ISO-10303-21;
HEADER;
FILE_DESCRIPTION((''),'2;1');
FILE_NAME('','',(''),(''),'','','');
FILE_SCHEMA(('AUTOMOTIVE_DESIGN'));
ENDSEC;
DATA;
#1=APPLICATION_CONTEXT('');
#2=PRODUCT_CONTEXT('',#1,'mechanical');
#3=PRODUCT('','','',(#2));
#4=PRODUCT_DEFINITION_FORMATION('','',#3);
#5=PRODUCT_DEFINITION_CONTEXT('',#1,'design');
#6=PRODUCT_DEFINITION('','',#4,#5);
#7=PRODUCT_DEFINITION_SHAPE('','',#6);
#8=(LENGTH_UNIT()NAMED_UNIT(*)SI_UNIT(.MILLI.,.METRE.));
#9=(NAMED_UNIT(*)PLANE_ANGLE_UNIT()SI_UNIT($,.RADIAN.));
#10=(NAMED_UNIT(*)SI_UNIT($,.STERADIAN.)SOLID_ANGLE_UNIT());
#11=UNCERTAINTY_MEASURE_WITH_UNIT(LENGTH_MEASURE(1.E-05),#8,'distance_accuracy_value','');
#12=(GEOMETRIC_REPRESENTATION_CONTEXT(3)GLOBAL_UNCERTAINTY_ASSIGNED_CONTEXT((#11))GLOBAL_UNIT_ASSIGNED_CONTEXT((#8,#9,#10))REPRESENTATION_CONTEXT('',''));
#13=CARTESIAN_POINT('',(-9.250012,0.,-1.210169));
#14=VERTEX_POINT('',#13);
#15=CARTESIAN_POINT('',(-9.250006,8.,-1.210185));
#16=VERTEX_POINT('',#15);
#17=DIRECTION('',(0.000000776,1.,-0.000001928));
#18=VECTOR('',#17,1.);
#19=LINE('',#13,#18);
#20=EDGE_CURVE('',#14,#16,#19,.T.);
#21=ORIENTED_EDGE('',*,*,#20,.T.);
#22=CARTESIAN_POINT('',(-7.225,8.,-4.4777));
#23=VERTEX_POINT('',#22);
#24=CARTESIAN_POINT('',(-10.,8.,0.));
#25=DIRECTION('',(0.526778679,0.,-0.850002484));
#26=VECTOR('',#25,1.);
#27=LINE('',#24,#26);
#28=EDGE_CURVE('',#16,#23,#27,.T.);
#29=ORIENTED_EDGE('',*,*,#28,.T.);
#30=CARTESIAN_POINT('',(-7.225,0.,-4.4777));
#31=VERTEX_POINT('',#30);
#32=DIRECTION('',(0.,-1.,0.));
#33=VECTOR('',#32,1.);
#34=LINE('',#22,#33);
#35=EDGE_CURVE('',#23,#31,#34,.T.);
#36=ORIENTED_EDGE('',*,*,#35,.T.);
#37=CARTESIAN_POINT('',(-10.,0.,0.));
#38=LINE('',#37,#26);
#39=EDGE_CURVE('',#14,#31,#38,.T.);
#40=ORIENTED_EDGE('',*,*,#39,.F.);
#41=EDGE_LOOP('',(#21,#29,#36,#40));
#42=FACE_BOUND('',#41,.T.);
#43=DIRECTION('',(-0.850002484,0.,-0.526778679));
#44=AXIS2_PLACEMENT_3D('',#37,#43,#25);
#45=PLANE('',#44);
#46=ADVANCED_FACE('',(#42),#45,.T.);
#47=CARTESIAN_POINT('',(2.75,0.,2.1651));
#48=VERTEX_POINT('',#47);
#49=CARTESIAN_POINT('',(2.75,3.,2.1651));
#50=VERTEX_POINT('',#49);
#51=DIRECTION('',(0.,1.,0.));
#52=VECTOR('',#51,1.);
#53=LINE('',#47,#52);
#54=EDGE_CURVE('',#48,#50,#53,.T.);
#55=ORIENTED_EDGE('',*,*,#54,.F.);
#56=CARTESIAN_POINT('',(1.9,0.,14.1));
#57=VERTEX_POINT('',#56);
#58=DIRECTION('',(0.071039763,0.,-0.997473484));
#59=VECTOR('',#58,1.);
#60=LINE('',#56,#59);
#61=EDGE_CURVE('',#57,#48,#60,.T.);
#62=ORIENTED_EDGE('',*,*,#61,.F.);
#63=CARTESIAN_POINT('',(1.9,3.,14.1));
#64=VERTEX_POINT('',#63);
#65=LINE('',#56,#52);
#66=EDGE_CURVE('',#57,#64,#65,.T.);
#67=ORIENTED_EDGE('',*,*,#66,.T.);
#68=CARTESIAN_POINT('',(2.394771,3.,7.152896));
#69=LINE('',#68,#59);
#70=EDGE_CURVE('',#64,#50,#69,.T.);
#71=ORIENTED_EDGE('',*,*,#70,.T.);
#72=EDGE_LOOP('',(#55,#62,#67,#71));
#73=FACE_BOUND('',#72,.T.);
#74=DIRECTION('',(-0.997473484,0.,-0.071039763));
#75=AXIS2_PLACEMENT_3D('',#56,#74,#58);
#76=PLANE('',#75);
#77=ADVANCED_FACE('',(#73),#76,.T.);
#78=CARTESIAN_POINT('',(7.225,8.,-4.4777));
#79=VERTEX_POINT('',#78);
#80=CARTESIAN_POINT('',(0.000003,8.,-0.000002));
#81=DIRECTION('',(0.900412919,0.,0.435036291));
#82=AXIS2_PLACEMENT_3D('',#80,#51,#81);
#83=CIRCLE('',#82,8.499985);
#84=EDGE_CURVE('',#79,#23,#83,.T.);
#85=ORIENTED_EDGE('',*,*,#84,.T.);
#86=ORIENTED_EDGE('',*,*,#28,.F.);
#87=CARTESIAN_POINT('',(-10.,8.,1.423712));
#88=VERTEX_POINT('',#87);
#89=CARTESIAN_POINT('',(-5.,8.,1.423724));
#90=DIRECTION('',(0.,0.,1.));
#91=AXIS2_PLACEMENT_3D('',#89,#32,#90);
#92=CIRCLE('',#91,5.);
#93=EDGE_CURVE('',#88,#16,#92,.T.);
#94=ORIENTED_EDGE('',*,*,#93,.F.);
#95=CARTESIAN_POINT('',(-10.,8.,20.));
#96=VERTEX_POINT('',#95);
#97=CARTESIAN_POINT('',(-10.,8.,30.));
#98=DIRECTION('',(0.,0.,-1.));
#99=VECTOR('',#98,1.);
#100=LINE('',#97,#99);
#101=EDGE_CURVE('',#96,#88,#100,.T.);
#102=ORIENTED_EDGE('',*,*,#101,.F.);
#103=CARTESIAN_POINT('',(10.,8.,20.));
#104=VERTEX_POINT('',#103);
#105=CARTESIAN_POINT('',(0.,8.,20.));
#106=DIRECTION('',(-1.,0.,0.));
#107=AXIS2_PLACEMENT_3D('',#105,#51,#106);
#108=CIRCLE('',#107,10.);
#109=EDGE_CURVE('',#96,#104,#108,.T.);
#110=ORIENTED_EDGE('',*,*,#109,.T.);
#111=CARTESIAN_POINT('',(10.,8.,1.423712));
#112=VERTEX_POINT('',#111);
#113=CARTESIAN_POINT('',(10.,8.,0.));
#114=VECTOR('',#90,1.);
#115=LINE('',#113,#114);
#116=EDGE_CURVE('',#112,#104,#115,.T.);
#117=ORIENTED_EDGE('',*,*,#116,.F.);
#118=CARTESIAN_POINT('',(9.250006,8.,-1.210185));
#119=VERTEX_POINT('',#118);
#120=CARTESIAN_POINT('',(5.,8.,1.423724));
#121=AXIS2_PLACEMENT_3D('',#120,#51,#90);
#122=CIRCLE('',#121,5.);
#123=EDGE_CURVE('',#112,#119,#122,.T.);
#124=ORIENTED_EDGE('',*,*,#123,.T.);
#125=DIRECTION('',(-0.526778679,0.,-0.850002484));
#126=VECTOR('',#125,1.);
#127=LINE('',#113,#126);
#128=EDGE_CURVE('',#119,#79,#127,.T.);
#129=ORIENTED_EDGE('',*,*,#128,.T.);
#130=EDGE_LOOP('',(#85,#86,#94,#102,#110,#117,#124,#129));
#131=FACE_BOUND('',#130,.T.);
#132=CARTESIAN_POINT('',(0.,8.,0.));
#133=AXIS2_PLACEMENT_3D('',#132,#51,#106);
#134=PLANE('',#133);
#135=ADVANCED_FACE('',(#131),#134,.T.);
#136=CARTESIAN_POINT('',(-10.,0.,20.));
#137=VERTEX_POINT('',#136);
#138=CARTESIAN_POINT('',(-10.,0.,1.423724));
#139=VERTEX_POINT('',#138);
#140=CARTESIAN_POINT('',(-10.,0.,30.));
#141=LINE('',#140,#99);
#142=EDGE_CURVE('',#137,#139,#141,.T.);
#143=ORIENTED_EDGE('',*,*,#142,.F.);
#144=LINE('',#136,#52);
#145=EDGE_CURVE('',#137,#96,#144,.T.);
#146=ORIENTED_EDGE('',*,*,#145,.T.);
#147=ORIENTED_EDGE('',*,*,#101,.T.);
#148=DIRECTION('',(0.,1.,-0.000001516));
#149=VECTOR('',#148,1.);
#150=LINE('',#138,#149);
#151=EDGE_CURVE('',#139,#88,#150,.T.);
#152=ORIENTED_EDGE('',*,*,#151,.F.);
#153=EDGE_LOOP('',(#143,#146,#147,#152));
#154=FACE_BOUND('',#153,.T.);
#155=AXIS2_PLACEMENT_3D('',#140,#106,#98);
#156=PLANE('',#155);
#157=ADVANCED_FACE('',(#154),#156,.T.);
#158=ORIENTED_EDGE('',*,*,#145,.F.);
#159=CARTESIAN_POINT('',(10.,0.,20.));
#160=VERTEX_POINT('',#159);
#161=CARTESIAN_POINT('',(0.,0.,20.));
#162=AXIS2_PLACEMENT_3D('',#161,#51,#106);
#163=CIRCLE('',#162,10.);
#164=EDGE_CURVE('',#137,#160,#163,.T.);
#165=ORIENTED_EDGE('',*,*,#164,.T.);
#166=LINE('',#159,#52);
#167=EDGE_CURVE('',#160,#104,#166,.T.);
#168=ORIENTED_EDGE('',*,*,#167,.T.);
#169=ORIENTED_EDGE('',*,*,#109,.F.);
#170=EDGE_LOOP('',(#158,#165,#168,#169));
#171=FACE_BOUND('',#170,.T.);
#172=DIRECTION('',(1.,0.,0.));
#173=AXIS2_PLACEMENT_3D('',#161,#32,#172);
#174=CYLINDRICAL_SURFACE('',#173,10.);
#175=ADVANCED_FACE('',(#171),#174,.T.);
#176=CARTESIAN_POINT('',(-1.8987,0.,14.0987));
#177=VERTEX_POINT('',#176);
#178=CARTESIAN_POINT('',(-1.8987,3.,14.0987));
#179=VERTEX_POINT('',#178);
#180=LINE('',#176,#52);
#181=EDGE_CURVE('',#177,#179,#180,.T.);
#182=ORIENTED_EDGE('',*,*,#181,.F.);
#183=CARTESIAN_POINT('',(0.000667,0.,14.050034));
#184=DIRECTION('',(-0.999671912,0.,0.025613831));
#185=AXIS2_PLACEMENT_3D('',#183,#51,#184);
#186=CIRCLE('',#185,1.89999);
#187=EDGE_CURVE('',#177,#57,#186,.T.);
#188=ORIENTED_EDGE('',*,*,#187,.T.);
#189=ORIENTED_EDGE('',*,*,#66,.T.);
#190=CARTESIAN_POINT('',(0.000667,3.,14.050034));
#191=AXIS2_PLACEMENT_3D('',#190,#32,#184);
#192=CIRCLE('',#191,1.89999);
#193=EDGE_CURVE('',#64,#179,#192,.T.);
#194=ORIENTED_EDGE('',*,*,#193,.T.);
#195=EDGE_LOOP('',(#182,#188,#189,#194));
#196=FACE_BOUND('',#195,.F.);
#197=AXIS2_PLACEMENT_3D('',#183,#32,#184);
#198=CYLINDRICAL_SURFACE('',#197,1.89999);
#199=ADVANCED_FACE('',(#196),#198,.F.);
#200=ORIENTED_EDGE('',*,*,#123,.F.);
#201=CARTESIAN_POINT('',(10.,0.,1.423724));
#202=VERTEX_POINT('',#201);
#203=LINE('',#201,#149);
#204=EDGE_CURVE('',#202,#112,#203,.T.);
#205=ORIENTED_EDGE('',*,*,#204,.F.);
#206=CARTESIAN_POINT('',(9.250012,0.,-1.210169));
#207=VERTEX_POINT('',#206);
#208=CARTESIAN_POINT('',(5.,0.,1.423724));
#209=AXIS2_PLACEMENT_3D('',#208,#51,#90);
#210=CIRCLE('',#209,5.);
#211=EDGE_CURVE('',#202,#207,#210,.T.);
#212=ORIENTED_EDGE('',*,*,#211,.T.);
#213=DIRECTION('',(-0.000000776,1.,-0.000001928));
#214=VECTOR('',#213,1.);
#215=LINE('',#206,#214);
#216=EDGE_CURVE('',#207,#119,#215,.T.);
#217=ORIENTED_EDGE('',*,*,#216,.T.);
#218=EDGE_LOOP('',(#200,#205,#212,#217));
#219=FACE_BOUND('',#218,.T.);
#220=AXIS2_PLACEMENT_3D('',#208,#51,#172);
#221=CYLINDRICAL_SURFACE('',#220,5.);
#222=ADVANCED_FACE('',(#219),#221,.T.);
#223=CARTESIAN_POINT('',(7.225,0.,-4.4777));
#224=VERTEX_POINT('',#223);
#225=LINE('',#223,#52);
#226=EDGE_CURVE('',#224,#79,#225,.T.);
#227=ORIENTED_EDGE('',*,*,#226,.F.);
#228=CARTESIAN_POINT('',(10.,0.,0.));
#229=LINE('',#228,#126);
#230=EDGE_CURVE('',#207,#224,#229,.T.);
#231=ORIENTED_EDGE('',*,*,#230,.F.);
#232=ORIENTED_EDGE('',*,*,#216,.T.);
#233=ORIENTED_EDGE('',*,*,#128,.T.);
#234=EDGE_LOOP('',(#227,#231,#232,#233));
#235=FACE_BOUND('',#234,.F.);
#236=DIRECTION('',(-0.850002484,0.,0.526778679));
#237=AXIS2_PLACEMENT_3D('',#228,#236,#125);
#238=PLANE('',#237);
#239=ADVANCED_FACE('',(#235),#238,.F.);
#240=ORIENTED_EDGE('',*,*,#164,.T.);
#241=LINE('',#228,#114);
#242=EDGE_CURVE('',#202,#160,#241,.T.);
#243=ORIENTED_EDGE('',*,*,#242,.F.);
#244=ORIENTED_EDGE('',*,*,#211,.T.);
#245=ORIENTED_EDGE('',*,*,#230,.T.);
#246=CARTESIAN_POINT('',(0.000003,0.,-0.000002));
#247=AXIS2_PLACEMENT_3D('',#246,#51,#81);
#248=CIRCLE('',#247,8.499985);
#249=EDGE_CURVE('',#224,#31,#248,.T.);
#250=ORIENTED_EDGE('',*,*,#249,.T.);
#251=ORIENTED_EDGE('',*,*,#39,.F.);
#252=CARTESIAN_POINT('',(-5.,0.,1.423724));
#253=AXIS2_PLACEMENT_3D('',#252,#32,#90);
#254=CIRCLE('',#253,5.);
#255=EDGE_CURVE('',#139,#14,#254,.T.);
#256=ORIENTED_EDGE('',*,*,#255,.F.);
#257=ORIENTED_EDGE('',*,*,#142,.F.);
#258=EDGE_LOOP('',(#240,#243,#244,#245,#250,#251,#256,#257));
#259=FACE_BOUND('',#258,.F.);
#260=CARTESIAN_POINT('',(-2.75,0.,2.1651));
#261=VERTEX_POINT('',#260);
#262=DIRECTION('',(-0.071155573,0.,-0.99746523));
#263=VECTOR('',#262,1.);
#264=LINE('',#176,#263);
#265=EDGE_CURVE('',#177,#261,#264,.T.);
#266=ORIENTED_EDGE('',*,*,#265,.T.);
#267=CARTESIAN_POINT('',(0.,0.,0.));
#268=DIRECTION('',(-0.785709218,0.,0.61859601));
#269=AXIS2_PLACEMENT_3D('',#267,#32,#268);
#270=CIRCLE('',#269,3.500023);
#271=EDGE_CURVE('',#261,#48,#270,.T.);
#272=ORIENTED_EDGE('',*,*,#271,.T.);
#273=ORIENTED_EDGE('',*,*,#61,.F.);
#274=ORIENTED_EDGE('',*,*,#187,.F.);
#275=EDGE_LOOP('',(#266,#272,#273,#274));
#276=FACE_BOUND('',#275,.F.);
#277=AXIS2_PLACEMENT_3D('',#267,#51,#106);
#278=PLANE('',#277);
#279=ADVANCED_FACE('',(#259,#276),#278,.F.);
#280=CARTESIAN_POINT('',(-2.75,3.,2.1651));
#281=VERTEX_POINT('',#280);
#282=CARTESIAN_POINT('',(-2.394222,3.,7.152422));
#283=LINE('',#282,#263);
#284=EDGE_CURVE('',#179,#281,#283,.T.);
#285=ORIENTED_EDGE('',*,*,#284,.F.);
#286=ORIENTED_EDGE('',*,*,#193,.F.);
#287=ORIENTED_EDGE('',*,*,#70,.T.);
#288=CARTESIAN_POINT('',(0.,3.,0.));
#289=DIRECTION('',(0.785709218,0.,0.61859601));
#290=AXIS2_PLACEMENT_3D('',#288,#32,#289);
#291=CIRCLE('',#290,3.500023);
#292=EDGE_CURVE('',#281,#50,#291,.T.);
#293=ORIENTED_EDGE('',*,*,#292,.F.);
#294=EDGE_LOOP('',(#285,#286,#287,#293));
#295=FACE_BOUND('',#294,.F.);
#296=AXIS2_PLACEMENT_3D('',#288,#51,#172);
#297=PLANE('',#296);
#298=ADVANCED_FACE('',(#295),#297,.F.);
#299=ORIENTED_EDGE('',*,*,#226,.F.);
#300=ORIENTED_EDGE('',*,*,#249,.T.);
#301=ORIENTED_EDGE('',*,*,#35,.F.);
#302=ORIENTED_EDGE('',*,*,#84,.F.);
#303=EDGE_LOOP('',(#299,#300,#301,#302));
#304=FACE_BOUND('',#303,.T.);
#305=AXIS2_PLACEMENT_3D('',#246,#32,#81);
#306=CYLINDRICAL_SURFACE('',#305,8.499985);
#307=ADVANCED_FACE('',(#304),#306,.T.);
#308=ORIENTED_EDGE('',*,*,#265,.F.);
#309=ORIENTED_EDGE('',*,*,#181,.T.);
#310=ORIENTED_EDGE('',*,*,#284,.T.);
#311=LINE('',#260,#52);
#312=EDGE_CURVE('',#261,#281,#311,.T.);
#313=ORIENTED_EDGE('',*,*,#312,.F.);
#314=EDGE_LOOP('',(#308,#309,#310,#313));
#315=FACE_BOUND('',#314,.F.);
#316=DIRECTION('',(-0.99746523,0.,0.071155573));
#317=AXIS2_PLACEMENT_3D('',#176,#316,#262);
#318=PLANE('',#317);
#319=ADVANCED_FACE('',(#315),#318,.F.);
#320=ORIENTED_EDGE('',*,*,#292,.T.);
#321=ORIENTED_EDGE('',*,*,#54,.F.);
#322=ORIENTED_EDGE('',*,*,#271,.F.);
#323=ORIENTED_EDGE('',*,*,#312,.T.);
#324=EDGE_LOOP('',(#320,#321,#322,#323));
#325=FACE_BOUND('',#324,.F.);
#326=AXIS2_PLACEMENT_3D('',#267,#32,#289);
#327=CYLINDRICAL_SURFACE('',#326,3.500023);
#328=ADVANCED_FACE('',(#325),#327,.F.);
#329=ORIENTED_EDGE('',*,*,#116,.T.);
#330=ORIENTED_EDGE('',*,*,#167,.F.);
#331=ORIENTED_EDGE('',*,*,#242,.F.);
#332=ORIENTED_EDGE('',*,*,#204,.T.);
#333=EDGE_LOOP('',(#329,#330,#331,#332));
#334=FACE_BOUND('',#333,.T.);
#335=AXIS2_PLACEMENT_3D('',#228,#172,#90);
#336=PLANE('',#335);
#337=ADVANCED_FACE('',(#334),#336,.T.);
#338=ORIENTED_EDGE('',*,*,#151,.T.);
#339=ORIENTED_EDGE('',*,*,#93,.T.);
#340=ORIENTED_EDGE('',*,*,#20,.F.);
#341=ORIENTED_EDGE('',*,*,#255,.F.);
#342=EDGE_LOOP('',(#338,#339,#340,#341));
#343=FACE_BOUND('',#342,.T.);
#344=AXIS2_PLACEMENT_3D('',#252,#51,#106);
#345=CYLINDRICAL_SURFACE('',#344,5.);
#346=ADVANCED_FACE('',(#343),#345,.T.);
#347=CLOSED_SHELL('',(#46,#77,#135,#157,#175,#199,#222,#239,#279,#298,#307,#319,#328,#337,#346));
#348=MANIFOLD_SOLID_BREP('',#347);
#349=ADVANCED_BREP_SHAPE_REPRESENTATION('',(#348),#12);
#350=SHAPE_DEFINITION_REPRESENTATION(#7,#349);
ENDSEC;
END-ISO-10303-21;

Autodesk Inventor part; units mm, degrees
ref_plane "YZ Plane" through (0, 0, 0) normal (1, 0, 0) x (0, 1, 0)
ref_plane "XZ Plane" through (0, 0, 0) normal (0, 1, 0) x (-1, 0, 0)
ref_plane "XY Plane" through (0, 0, 0) normal (0, 0, 1) x (1, 0, 0)
sketch "Sketch1" plane through (0, 0, 0) normal (0, 1, 0) x (-1, 0, 0)
  arc A0 (-2.75, 2.1651) -> (2.75, 2.1651) centre (0, 0) ccw
  line L0 (-1.9, 14.1) -> (-2.75, 2.1651)
  line L1 (1.8987, 14.0987) -> (2.75, 2.1651)
  arc A1 (1.8987, 14.0987) -> (-1.9, 14.1) centre (-0.0007, 14.05) ccw
  circle A2 centre (0, 0) radius 0.5
  line L2 (0, 0) -> (0, -10) construction
  line L3 (0, 30) -> (0, 0) construction
  arc A3 (-7.6535, 3.6978) -> (7.6533, 3.6982) centre (0, 0) ccw
  line L4 (7.6533, 3.6982) -> (6.8916, 14.3762)
  arc A4 (6.8916, 14.3762) -> (-6.8928, 14.3783) centre (-0.0007, 14.05) ccw
  line L5 (-6.8928, 14.3783) -> (-7.6535, 3.6978)
  line L6 (10, 0) -> (-10, 0)
  line L7 (-10, 0) -> (-10, 30)
  line L8 (-10, 30) -> (10, 30)
  line L9 (10, 30) -> (10, 0)
  point P0 (-8.5, 0)
  point P1 (8.5, 0)
  dimension "d0" = 1
  dimension "d9" = 1.9
  dimension "d11" = 3.5
  dimension "d34" = 10
  dimension "d42" = 5
  dimension "d43" = 20
  dimension "d44" = 30
extrude "Extrusion6" add sketch "Sketch1" along normal blind 8 contours A0 L6 A3 L5 A4 L4 L1 A1 L0 | A0 L6 A3 | L6 L7 L8 L9 A3 L4 A4 L5
sketch "Sketch7" plane through (0, 0, 0) normal (0, -1, 0) x (1, 0, 0)
  arc A0 (-8.5, 0) -> (8.5, 0) centre (0, 0) ccw projected
  line L0 (10, 30) -> (10, 0) projected
  line L1 (-10, 0) -> (-10, 30) projected
  line L2 (-10, 0) -> (-10, 30) projected
  line L3 (-10, 0) -> (-7.225, -4.4777)
  line L4 (10, 0) -> (7.225, -4.4777)
  line L5 (8.5, 0) -> (10, 0)
  line L6 (-8.5, 0) -> (-10, 0) projected
  line L7 (-8.5, 0) -> (-10, 0)
extrude "Extrusion7" add sketch "Sketch7" against normal blind 8
fillet "Fillet1" radius 5 2 edges at (10, 4, 0) (-10, 4, 0)
sketch "Sketch8" plane through (0, 0, 0) normal (0, -1, 0) x (1, 0, 0)
  arc A0 (-10, 1.4237) -> (-9.25, -1.2102) centre (-5, 1.4237) ccw projected
  line L0 (-9.25, -1.2102) -> (-7.225, -4.4777) projected
  arc A1 (-7.225, -4.4777) -> (7.225, -4.4777) centre (0, 0) ccw projected
  line L1 (7.225, -4.4777) -> (9.25, -1.2102) projected
  arc A2 (9.25, -1.2102) -> (10, 1.4237) centre (5, 1.4237) ccw projected
  line L2 (10, 30) -> (10, 1.4237) projected
  line L3 (-10, 30) -> (10, 30) projected
  line L4 (-10, 1.4237) -> (-10, 30) projected
  arc A3 (-2.75, 2.1651) -> (2.75, 2.1651) centre (0, 0) ccw projected
  line L5 (-1.8987, 14.0987) -> (-2.75, 2.1651) projected
  arc A4 (1.9, 14.1) -> (-1.8987, 14.0987) centre (0.0007, 14.05) ccw projected
  line L6 (2.75, 2.1651) -> (1.9, 14.1) projected
  circle A5 centre (0, 20) radius 10
  line L7 (10, 30) -> (10, 1.4237) projected
  line L8 (-10, 30) -> (10, 30) projected
  point P0 (-10, 20)
  point P1 (0, 30)
  point P2 (10, 20)
  dimension "d50" = 20
extrude "Extrusion8" cut sketch "Sketch8" against normal through all contours L4 L3 A5 | L3 L2 A5
sketch "Sketch9" plane through (0, 8, 0) normal (0, 1, 0) x (1, 0, 0)
  arc A0 (-10, -20) -> (10, -20) centre (0, -20) ccw projected
  line L0 (-10, -1.4237) -> (-10, -20) projected
  arc A1 (-9.25, 1.2102) -> (-10, -1.4237) centre (-5, -1.4237) ccw projected
  line L1 (-7.225, 4.4777) -> (-9.25, 1.2102) projected
  arc A2 (7.225, 4.4777) -> (-7.225, 4.4777) centre (0, 0) ccw projected
  line L2 (9.25, 1.2102) -> (7.225, 4.4777) projected
  arc A3 (10, -1.4237) -> (9.25, 1.2102) centre (5, -1.4237) ccw projected
  line L3 (10, -20) -> (10, -1.4237) projected
extrude "Extrusion9" add sketch "Sketch9" against normal blind 5
properties part number "Servo_Shaft_select_V1"
